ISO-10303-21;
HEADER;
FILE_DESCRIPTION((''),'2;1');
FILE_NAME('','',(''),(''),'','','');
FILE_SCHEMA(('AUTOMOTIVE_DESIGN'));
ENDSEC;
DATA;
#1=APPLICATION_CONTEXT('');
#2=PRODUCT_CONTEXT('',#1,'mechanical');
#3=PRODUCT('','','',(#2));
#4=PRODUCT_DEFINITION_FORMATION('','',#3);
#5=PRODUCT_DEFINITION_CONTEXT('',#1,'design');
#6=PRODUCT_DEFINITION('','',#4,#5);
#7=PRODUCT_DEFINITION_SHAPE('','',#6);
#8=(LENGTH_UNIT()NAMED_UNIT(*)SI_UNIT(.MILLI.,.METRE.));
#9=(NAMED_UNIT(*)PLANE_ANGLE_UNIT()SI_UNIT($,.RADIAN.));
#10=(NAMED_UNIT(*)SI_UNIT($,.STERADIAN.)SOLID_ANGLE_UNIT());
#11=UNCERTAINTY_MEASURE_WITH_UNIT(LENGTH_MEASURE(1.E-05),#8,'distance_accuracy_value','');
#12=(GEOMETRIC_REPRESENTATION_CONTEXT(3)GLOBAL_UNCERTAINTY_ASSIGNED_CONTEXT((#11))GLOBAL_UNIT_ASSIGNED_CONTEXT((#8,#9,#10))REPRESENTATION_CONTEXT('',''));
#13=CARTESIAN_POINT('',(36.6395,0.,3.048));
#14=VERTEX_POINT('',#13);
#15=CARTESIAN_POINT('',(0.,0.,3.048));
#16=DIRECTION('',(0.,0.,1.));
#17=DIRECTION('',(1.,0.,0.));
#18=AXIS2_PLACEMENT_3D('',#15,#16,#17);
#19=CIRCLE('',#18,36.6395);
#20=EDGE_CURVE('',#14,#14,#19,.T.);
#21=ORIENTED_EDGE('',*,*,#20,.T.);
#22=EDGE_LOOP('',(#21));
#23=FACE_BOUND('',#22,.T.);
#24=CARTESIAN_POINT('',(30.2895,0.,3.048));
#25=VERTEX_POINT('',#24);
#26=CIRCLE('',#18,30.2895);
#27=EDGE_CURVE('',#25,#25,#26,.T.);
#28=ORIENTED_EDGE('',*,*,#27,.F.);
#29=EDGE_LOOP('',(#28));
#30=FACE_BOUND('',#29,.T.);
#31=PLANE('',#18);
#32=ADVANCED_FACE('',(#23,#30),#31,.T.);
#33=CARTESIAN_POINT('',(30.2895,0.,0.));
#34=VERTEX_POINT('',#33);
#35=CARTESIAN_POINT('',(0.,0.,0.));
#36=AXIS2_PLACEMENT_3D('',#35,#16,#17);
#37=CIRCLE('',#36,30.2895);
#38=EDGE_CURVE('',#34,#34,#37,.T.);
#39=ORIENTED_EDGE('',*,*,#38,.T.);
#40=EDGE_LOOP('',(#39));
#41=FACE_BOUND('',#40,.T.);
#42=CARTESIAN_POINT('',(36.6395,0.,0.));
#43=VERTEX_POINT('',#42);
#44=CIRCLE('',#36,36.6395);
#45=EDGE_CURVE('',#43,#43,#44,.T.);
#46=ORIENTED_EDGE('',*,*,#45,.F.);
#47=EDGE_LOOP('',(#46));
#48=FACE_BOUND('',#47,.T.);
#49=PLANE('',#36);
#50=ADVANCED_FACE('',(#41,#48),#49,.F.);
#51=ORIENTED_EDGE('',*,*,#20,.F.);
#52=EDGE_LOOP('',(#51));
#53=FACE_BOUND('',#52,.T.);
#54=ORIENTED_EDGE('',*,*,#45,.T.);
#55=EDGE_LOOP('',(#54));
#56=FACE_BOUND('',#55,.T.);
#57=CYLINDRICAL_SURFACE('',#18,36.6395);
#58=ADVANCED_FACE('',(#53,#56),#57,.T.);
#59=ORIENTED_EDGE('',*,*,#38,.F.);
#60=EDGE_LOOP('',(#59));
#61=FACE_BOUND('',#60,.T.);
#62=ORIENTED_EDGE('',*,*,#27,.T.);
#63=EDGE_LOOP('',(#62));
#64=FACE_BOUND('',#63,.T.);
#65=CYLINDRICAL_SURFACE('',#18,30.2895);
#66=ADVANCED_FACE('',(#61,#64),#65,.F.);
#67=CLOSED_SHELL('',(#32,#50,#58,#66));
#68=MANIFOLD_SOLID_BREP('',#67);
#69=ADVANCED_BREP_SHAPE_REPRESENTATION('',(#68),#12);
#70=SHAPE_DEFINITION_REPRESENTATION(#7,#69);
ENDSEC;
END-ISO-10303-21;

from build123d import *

# Parameters (mm, degrees)
SKETCH1_R           = 36.6395
SKETCH1_R_2         = 30.2895
BOSS_EXTRUDE1_DEPTH = 3.048


with BuildPart() as part:
    # Sketch1 → Boss-Extrude1 (new body)
    with BuildSketch(Plane.XY):
        with Locations(Location((0, 0, 0), (0, 0, 180))):
            Circle(SKETCH1_R)
        with Locations(Location((0, 0, 0), (0, 0, 180))):
            Circle(SKETCH1_R_2, mode=Mode.SUBTRACT)
    extrude(amount=BOSS_EXTRUDE1_DEPTH)


solid = part.part
